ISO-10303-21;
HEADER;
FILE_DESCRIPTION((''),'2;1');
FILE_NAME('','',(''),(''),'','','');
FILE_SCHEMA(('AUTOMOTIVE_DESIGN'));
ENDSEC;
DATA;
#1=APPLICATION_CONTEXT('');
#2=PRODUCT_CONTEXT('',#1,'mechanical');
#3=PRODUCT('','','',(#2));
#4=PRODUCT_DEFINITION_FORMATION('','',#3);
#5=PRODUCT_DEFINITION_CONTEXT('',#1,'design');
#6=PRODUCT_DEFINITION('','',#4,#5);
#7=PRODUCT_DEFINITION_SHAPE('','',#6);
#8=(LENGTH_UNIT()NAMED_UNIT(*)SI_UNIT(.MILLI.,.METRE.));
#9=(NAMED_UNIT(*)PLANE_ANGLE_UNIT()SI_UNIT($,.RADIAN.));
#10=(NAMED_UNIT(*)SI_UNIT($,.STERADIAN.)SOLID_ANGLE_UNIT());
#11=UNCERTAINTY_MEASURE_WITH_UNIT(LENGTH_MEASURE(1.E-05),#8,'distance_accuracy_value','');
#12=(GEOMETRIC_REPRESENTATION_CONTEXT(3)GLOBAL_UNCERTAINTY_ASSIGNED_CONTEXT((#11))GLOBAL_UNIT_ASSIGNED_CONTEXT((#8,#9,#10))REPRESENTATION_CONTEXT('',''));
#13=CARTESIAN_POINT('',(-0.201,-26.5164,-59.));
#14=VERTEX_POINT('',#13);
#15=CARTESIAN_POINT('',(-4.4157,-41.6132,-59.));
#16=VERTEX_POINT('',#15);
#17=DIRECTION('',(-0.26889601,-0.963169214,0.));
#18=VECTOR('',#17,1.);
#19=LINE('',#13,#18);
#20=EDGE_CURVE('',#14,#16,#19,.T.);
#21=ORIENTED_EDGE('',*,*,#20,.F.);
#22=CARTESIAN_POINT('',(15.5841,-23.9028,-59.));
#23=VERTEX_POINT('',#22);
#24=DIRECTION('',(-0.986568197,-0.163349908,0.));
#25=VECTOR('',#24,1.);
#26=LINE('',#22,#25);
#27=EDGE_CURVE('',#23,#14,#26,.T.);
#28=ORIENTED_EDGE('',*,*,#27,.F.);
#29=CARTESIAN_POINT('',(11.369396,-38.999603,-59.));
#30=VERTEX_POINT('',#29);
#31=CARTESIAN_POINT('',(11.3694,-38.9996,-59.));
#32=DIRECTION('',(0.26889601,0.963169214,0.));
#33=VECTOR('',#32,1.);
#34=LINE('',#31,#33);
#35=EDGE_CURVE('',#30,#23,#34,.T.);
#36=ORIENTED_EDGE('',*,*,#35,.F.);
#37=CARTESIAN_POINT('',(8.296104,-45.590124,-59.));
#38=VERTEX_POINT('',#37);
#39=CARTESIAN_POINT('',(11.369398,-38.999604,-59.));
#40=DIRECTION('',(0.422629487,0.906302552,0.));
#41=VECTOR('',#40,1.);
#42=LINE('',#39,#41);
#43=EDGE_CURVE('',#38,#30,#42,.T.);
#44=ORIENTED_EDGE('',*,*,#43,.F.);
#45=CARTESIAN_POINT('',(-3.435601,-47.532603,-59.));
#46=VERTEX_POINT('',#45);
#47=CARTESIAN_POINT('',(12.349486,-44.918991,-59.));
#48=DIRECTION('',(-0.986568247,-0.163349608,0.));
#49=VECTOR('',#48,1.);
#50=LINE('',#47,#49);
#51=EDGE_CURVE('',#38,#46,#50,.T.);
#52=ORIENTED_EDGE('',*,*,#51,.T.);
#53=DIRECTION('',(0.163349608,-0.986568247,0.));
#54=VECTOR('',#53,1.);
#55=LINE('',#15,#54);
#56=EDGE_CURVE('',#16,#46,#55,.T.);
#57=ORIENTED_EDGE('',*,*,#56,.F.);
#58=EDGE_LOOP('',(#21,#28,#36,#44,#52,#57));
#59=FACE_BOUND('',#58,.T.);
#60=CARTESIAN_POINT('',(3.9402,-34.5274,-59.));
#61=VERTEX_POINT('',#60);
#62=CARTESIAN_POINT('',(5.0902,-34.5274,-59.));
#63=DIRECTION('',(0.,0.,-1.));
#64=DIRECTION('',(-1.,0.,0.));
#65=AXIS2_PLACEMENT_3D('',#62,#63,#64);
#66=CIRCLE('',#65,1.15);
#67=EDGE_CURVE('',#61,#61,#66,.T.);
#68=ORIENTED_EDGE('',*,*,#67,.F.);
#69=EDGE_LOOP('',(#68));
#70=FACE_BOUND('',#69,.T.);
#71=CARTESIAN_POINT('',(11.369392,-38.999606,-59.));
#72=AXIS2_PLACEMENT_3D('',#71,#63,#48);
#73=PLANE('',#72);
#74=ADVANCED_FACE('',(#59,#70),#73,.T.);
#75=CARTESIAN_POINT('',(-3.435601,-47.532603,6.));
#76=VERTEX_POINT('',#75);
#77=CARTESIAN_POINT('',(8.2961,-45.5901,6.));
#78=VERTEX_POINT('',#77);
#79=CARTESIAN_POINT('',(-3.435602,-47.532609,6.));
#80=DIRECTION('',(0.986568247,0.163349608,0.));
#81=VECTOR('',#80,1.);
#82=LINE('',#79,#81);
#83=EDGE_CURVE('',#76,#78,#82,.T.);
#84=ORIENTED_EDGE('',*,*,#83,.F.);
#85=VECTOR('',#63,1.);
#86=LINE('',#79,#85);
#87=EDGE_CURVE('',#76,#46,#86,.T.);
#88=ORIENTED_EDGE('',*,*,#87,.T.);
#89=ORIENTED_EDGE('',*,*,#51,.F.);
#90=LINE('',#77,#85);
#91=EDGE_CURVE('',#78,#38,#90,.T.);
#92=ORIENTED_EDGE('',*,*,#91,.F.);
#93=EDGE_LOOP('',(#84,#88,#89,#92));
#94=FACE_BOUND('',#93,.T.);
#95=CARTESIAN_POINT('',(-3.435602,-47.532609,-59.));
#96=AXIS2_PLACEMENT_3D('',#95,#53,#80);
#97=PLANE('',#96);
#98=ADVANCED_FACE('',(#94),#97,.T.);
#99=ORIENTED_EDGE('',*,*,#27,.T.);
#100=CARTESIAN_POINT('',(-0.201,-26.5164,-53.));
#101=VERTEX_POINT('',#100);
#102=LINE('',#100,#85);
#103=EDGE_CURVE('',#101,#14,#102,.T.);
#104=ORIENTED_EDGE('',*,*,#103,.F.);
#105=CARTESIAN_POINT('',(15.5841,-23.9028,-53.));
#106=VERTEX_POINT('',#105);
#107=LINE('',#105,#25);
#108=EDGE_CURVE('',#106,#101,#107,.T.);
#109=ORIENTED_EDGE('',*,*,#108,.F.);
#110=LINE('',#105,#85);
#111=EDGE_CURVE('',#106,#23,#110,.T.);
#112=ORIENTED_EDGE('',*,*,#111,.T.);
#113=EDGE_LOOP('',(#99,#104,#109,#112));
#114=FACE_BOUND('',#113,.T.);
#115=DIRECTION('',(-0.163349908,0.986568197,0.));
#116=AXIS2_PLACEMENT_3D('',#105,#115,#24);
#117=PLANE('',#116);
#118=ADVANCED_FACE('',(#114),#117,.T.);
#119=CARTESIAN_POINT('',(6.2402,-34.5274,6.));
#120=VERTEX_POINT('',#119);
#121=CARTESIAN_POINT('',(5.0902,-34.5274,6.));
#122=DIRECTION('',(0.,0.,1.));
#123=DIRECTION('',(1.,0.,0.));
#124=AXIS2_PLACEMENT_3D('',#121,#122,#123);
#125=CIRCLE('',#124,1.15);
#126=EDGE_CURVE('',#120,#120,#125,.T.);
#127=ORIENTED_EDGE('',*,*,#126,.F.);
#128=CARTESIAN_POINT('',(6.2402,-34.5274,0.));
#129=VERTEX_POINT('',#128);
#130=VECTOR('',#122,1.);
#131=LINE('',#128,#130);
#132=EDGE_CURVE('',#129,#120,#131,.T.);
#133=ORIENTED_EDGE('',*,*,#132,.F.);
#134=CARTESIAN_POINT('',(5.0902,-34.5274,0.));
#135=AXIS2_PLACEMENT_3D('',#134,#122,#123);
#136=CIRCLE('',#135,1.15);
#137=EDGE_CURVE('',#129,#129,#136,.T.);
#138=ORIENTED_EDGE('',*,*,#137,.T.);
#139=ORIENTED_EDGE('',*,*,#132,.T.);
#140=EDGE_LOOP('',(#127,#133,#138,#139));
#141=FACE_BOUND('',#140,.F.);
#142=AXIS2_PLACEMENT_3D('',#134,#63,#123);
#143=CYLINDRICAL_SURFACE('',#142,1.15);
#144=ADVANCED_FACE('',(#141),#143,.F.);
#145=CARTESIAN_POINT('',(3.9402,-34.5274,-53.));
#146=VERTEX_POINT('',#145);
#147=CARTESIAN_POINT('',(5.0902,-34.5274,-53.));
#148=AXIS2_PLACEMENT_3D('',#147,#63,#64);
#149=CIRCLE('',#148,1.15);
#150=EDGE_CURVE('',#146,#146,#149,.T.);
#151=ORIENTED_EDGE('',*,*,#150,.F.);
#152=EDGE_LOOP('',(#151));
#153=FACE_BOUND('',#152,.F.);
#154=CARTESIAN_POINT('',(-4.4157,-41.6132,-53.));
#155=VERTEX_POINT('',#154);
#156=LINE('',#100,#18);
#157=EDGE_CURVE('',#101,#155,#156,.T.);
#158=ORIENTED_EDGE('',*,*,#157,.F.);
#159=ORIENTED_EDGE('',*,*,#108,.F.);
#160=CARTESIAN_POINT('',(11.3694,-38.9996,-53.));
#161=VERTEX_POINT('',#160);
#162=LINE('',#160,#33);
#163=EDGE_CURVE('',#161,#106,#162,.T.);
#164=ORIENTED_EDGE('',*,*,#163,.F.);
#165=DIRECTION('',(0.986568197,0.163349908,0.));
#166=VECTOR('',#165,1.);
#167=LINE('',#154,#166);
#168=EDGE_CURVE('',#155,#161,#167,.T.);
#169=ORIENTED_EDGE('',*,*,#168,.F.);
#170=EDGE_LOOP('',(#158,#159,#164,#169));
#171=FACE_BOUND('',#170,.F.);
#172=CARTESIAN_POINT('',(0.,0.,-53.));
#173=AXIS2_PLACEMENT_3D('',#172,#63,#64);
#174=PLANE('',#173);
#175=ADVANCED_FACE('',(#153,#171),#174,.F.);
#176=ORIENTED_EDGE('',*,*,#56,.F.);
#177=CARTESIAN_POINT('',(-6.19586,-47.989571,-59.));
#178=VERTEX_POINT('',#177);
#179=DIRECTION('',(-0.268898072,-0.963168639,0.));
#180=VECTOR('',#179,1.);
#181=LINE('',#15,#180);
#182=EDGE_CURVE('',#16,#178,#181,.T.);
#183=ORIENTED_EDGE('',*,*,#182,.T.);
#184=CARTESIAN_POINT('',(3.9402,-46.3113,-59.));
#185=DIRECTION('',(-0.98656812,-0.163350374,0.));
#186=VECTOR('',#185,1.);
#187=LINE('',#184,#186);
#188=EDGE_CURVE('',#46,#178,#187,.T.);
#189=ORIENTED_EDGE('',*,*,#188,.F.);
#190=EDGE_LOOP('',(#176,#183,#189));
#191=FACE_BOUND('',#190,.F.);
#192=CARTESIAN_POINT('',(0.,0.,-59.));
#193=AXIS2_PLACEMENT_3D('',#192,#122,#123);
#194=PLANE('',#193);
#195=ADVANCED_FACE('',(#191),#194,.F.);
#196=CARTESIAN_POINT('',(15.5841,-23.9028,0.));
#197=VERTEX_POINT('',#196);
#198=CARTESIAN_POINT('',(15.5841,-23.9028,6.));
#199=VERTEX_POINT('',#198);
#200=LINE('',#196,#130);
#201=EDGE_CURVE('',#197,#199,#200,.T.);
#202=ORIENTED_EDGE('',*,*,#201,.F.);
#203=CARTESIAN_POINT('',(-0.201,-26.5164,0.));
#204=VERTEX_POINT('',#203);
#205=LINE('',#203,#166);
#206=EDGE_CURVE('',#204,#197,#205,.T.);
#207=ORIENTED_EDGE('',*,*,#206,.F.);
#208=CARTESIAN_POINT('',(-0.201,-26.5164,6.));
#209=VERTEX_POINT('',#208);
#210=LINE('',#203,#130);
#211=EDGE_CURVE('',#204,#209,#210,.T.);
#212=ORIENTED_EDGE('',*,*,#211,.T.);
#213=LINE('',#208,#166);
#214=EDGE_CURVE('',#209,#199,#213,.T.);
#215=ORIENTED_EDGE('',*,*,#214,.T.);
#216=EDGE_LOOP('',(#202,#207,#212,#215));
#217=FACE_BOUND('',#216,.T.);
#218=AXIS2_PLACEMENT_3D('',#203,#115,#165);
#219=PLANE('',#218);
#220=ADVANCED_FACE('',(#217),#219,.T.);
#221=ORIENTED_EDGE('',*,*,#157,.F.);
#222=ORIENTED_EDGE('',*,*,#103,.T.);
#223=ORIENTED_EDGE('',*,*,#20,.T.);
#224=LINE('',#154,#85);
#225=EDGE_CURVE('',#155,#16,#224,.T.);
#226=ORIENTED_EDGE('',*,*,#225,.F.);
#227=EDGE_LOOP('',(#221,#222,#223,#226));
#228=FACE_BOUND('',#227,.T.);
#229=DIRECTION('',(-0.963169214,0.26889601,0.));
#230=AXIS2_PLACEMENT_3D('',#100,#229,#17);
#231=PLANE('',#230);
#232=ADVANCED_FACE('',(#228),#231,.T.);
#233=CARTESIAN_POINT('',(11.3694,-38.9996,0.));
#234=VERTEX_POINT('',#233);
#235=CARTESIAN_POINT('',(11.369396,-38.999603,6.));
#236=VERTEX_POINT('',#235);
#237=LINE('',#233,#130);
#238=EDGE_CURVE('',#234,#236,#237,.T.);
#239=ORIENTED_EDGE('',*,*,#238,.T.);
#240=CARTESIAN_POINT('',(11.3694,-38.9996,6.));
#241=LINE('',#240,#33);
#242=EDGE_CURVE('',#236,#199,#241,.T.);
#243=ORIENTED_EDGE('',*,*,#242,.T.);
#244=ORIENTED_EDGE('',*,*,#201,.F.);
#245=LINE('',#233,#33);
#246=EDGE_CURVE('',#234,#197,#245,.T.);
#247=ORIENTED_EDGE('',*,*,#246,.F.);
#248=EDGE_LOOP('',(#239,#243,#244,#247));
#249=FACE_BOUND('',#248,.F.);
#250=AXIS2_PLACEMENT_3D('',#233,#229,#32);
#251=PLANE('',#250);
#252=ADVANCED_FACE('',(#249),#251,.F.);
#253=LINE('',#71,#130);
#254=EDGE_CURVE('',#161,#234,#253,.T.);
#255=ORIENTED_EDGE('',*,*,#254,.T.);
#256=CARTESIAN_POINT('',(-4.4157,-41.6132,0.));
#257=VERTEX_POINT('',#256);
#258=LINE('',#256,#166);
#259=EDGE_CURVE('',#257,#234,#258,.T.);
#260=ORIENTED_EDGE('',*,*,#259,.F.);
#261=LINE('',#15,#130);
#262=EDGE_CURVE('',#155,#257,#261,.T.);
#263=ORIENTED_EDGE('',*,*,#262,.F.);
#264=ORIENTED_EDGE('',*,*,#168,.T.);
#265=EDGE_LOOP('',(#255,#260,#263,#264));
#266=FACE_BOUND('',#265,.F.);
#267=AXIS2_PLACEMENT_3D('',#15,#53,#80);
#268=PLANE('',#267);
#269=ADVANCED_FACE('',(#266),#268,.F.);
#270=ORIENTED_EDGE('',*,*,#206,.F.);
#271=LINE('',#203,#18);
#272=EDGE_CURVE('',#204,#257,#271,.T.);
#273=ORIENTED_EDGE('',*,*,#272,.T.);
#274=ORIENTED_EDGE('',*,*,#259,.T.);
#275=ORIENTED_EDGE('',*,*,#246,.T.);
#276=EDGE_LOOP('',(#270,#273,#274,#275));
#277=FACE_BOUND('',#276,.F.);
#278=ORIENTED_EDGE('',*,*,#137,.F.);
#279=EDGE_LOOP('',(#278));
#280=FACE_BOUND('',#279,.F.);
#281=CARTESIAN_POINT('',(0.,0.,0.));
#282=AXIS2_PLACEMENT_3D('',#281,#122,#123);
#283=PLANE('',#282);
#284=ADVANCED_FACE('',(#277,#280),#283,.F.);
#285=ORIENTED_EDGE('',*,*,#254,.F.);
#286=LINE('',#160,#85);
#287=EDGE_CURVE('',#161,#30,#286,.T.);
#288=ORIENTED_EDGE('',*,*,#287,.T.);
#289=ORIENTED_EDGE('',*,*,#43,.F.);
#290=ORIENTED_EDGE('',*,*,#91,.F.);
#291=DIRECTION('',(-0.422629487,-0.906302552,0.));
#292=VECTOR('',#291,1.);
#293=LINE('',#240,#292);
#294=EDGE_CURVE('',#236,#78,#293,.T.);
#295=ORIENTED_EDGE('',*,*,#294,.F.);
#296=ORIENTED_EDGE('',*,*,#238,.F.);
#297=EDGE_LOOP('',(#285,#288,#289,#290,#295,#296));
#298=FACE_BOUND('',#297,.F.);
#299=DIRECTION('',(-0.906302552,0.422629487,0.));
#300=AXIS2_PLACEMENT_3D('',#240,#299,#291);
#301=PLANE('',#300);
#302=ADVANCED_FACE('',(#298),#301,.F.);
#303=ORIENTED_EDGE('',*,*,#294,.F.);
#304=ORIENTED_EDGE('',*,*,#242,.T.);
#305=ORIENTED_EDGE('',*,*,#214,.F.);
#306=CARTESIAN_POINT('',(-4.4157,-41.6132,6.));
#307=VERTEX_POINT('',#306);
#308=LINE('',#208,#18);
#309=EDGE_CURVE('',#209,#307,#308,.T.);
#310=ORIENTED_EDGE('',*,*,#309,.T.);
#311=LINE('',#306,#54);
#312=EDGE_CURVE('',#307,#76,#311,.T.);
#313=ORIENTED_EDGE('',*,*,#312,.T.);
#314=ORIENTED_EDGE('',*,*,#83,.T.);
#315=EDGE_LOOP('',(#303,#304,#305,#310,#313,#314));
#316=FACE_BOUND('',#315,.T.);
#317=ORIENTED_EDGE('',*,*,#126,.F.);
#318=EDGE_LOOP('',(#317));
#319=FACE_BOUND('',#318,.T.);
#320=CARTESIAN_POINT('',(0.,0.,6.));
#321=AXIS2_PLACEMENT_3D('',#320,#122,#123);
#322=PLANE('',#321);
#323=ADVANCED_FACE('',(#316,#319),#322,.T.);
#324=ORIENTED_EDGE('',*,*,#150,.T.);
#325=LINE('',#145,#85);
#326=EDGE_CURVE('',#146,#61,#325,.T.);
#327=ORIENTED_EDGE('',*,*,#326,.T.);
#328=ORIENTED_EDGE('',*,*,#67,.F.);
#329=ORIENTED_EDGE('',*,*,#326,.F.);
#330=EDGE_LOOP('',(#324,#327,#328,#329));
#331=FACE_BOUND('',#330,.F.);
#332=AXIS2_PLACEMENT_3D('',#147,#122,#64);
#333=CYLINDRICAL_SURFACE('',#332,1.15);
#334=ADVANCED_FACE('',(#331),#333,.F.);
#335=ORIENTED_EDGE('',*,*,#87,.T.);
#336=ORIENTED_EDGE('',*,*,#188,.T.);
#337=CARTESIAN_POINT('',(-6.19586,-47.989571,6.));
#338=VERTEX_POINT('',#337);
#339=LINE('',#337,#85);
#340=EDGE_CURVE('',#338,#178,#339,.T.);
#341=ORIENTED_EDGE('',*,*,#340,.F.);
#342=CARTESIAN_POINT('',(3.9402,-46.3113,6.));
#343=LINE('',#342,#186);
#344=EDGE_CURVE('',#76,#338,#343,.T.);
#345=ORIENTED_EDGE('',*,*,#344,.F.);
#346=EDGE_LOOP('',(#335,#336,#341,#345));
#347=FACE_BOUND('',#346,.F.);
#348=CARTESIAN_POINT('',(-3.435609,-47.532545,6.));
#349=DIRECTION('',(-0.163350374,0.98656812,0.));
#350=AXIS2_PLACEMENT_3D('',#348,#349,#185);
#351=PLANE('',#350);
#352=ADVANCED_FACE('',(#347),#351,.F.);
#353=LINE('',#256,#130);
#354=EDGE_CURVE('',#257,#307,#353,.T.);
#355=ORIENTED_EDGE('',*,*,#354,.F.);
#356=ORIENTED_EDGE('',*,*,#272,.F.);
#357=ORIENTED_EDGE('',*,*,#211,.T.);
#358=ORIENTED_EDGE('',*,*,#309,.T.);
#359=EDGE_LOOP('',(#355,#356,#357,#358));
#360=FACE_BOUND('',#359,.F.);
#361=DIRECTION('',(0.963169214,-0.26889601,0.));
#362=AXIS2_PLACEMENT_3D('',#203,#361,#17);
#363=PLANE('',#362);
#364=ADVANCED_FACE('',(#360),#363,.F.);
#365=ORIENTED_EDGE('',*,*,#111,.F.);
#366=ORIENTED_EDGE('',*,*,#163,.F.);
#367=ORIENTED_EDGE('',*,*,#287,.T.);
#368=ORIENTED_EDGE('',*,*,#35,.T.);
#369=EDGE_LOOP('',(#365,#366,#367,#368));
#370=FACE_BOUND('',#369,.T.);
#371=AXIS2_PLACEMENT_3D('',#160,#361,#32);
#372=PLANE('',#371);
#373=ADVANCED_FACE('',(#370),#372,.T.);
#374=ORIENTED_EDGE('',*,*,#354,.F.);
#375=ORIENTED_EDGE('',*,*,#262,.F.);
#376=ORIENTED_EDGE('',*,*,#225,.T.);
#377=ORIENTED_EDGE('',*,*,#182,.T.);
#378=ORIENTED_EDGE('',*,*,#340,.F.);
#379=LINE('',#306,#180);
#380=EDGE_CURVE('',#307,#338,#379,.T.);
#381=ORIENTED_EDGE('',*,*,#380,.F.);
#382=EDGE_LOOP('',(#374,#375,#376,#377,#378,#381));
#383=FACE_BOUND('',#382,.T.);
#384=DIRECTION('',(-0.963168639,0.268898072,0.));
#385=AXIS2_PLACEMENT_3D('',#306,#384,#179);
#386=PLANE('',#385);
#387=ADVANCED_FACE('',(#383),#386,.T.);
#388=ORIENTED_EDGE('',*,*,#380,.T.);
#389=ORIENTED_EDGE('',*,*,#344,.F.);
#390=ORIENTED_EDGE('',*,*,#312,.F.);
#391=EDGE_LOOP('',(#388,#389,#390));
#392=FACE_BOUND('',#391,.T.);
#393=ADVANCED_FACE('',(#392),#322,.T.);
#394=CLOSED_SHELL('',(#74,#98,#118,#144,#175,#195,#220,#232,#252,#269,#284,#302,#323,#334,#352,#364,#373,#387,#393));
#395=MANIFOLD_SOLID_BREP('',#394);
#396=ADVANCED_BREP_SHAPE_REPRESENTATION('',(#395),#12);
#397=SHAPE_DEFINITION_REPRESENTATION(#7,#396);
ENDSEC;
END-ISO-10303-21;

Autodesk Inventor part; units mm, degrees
ref_plane "YZ Plane" through (0, 0, 0) normal (1, 0, 0) x (0, 1, 0)
ref_plane "XZ Plane" through (0, 0, 0) normal (0, 1, 0) x (-1, 0, 0)
ref_plane "XY Plane" through (0, 0, 0) normal (0, 0, 1) x (1, 0, 0)
ref_plane "작업 평면1" through (0, 0, 0) normal (0, 0, 1) x (1, 0, 0)
sketch "스케치1" plane through (0, 0, 0) normal (0, 0, 1) x (1, 0, 0)
  circle A0 centre (5.0902, -34.5274) radius 1.15 projected
  arc A1 (-17.0321, 89.7044) -> (-16.6881, 73.0594) centre (-9.9807, 81.5241) ccw projected
  line L0 (-16.6881, 73.0594) -> (-0.201, -26.5164) projected
  line L1 (-0.201, -26.5164) -> (-4.4157, -41.6132) projected
  line L2 (-4.4157, -41.6132) -> (11.3694, -38.9996) projected
  line L3 (11.3694, -38.9996) -> (15.5841, -23.9028) projected
  line L4 (15.5841, -23.9028) -> (-0.903, 75.673) projected
  arc A2 (-0.903, 75.673) -> (-5.9423, 91.5406) centre (-9.9807, 81.5241) ccw projected
  arc A3 (-5.9423, 91.5406) -> (-7.3028, 90.4498) centre (-6.3162, 90.6132) ccw projected
  line L5 (-7.3028, 90.4498) -> (-5.9358, 82.1938) projected
  arc A4 (-14.0257, 80.8544) -> (-5.9358, 82.1938) centre (-9.9807, 81.5241) ccw projected
  line L6 (-14.0257, 80.8544) -> (-15.3926, 89.1104) projected
  arc A5 (-15.3926, 89.1104) -> (-17.0321, 89.7044) centre (-16.3792, 88.947) ccw projected
  circle A6 centre (-14.6376, 75.0192) radius 1.3 projected
  circle A7 centre (-3.4758, 76.8673) radius 1.3 projected
  circle A8 centre (-5.3239, 88.029) radius 1.3 projected
  circle A9 centre (-8.6739, 73.6316) radius 1.3 projected
  circle A10 centre (-2.0882, 82.8309) radius 1.3 projected
  circle A11 centre (-16.4857, 86.1809) radius 1.3 projected
  circle A12 centre (-17.8733, 80.2173) radius 1.3 projected
  line L7 (-0.201, -26.5164) -> (15.5841, -23.9028)
  point P0 (0, 0)
extrude "돌출1" add sketch "스케치1" along normal blind 6 contours L7 L3 L2 L1
ref_plane "작업 평면2" through (0, 0, -53) normal (0, 0, -1) x (-1, 0, 0)
sketch "스케치2" plane through (0, 0, -53) normal (0, 0, -1) x (-1, 0, 0)
  line L0 (4.4157, -41.6132) -> (-11.3694, -38.9996) projected
  line L1 (-11.3694, -38.9996) -> (-15.5841, -23.9028) projected
  line L2 (-15.5841, -23.9028) -> (0.201, -26.5164) projected
  line L3 (0.201, -26.5164) -> (4.4157, -41.6132) projected
  circle A0 centre (-5.0902, -34.5274) radius 1.15 projected
  point P0 (0, 0)
extrude "돌출2" add sketch "스케치2" along normal blind 6
sketch "스케치7" plane through (-4.4157, -41.6132, -59) normal (0.1633496, -0.9865682, 0) x (0.9865682, 0.1633496, 0)
  line L0 (16, 6) -> (0, 6) projected
  line L1 (0, 6) -> (0, 0) projected
  line L2 (16, 0) -> (0, 0) projected
  line L3 (16, 6) -> (16, 0) projected
  line L4 (0, 59) -> (16, 59) projected
  line L5 (16, 59) -> (16, 65) projected
  line L6 (0, 65) -> (16, 65) projected
  line L7 (0, 59) -> (0, 65) projected
  line L8 (16, 0) -> (0, 0) projected
  line L9 (0, 0) -> (16, 0)
  line L10 (16, 0) -> (16, 65)
  line L11 (16, 65) -> (0, 65)
  line L12 (0, 65) -> (0, 0)
  point P0 (11.1539, 59)
  point P1 (16, 6)
  point P2 (16, 59)
  point P3 (0, 6)
extrude "돌출4" add sketch "스케치7" along normal blind 6
sketch "스케치8" plane through (0, 0, 6) normal (0, 0, 1) x (1, 0, 0)
  line L0 (11.3694, -38.9996) -> (15.5841, -23.9028) projected
  line L1 (15.5841, -23.9028) -> (-0.201, -26.5164) projected
  line L2 (-0.201, -26.5164) -> (-4.4157, -41.6132) projected
  line L3 (-4.4157, -41.6132) -> (-3.4356, -47.5326) projected
  line L4 (12.3495, -44.919) -> (-3.4356, -47.5326) projected
  line L5 (11.3694, -38.9996) -> (12.3495, -44.919) projected
  circle A0 centre (5.0902, -34.5274) radius 1.15 projected
  line L6 (11.3694, -38.9996) -> (8.2961, -45.5901)
  line L7 (11.3694, -38.9996) -> (19.8926, -38.9996) construction
  point P0 (0, 0)
  dimension "d8" = 115
extrude "돌출5" cut sketch "스케치8" against normal blind 70 contours L5 L4 L6
sketch "스케치9" plane through (0, 0, 6) normal (0, 0, 1) x (1, 0, 0)
  circle A0 centre (5.0902, -34.5274) radius 1.15 projected
  line L0 (8.2961, -45.5901) -> (11.3694, -38.9996) projected
  line L1 (11.3694, -38.9996) -> (15.5841, -23.9028) projected
  line L2 (15.5841, -23.9028) -> (-0.201, -26.5164) projected
  line L3 (-0.201, -26.5164) -> (-4.4157, -41.6132) projected
  line L4 (-4.4157, -41.6132) -> (-3.4356, -47.5326) projected
  line L5 (8.2961, -45.5901) -> (-3.4356, -47.5326) projected
  line L6 (-4.4157, -41.6132) -> (-7.6705, -53.2716)
  line L7 (3.9402, -46.3113) -> (-21.3119, -50.4924)
  point P0 (0, 0)
  point P1 (-6.1959, -47.9896)
extrude "돌출6" add sketch "스케치9" against normal blind 65 contours L7 L6 L4
properties part number "70" material "LCP 플라스틱"
